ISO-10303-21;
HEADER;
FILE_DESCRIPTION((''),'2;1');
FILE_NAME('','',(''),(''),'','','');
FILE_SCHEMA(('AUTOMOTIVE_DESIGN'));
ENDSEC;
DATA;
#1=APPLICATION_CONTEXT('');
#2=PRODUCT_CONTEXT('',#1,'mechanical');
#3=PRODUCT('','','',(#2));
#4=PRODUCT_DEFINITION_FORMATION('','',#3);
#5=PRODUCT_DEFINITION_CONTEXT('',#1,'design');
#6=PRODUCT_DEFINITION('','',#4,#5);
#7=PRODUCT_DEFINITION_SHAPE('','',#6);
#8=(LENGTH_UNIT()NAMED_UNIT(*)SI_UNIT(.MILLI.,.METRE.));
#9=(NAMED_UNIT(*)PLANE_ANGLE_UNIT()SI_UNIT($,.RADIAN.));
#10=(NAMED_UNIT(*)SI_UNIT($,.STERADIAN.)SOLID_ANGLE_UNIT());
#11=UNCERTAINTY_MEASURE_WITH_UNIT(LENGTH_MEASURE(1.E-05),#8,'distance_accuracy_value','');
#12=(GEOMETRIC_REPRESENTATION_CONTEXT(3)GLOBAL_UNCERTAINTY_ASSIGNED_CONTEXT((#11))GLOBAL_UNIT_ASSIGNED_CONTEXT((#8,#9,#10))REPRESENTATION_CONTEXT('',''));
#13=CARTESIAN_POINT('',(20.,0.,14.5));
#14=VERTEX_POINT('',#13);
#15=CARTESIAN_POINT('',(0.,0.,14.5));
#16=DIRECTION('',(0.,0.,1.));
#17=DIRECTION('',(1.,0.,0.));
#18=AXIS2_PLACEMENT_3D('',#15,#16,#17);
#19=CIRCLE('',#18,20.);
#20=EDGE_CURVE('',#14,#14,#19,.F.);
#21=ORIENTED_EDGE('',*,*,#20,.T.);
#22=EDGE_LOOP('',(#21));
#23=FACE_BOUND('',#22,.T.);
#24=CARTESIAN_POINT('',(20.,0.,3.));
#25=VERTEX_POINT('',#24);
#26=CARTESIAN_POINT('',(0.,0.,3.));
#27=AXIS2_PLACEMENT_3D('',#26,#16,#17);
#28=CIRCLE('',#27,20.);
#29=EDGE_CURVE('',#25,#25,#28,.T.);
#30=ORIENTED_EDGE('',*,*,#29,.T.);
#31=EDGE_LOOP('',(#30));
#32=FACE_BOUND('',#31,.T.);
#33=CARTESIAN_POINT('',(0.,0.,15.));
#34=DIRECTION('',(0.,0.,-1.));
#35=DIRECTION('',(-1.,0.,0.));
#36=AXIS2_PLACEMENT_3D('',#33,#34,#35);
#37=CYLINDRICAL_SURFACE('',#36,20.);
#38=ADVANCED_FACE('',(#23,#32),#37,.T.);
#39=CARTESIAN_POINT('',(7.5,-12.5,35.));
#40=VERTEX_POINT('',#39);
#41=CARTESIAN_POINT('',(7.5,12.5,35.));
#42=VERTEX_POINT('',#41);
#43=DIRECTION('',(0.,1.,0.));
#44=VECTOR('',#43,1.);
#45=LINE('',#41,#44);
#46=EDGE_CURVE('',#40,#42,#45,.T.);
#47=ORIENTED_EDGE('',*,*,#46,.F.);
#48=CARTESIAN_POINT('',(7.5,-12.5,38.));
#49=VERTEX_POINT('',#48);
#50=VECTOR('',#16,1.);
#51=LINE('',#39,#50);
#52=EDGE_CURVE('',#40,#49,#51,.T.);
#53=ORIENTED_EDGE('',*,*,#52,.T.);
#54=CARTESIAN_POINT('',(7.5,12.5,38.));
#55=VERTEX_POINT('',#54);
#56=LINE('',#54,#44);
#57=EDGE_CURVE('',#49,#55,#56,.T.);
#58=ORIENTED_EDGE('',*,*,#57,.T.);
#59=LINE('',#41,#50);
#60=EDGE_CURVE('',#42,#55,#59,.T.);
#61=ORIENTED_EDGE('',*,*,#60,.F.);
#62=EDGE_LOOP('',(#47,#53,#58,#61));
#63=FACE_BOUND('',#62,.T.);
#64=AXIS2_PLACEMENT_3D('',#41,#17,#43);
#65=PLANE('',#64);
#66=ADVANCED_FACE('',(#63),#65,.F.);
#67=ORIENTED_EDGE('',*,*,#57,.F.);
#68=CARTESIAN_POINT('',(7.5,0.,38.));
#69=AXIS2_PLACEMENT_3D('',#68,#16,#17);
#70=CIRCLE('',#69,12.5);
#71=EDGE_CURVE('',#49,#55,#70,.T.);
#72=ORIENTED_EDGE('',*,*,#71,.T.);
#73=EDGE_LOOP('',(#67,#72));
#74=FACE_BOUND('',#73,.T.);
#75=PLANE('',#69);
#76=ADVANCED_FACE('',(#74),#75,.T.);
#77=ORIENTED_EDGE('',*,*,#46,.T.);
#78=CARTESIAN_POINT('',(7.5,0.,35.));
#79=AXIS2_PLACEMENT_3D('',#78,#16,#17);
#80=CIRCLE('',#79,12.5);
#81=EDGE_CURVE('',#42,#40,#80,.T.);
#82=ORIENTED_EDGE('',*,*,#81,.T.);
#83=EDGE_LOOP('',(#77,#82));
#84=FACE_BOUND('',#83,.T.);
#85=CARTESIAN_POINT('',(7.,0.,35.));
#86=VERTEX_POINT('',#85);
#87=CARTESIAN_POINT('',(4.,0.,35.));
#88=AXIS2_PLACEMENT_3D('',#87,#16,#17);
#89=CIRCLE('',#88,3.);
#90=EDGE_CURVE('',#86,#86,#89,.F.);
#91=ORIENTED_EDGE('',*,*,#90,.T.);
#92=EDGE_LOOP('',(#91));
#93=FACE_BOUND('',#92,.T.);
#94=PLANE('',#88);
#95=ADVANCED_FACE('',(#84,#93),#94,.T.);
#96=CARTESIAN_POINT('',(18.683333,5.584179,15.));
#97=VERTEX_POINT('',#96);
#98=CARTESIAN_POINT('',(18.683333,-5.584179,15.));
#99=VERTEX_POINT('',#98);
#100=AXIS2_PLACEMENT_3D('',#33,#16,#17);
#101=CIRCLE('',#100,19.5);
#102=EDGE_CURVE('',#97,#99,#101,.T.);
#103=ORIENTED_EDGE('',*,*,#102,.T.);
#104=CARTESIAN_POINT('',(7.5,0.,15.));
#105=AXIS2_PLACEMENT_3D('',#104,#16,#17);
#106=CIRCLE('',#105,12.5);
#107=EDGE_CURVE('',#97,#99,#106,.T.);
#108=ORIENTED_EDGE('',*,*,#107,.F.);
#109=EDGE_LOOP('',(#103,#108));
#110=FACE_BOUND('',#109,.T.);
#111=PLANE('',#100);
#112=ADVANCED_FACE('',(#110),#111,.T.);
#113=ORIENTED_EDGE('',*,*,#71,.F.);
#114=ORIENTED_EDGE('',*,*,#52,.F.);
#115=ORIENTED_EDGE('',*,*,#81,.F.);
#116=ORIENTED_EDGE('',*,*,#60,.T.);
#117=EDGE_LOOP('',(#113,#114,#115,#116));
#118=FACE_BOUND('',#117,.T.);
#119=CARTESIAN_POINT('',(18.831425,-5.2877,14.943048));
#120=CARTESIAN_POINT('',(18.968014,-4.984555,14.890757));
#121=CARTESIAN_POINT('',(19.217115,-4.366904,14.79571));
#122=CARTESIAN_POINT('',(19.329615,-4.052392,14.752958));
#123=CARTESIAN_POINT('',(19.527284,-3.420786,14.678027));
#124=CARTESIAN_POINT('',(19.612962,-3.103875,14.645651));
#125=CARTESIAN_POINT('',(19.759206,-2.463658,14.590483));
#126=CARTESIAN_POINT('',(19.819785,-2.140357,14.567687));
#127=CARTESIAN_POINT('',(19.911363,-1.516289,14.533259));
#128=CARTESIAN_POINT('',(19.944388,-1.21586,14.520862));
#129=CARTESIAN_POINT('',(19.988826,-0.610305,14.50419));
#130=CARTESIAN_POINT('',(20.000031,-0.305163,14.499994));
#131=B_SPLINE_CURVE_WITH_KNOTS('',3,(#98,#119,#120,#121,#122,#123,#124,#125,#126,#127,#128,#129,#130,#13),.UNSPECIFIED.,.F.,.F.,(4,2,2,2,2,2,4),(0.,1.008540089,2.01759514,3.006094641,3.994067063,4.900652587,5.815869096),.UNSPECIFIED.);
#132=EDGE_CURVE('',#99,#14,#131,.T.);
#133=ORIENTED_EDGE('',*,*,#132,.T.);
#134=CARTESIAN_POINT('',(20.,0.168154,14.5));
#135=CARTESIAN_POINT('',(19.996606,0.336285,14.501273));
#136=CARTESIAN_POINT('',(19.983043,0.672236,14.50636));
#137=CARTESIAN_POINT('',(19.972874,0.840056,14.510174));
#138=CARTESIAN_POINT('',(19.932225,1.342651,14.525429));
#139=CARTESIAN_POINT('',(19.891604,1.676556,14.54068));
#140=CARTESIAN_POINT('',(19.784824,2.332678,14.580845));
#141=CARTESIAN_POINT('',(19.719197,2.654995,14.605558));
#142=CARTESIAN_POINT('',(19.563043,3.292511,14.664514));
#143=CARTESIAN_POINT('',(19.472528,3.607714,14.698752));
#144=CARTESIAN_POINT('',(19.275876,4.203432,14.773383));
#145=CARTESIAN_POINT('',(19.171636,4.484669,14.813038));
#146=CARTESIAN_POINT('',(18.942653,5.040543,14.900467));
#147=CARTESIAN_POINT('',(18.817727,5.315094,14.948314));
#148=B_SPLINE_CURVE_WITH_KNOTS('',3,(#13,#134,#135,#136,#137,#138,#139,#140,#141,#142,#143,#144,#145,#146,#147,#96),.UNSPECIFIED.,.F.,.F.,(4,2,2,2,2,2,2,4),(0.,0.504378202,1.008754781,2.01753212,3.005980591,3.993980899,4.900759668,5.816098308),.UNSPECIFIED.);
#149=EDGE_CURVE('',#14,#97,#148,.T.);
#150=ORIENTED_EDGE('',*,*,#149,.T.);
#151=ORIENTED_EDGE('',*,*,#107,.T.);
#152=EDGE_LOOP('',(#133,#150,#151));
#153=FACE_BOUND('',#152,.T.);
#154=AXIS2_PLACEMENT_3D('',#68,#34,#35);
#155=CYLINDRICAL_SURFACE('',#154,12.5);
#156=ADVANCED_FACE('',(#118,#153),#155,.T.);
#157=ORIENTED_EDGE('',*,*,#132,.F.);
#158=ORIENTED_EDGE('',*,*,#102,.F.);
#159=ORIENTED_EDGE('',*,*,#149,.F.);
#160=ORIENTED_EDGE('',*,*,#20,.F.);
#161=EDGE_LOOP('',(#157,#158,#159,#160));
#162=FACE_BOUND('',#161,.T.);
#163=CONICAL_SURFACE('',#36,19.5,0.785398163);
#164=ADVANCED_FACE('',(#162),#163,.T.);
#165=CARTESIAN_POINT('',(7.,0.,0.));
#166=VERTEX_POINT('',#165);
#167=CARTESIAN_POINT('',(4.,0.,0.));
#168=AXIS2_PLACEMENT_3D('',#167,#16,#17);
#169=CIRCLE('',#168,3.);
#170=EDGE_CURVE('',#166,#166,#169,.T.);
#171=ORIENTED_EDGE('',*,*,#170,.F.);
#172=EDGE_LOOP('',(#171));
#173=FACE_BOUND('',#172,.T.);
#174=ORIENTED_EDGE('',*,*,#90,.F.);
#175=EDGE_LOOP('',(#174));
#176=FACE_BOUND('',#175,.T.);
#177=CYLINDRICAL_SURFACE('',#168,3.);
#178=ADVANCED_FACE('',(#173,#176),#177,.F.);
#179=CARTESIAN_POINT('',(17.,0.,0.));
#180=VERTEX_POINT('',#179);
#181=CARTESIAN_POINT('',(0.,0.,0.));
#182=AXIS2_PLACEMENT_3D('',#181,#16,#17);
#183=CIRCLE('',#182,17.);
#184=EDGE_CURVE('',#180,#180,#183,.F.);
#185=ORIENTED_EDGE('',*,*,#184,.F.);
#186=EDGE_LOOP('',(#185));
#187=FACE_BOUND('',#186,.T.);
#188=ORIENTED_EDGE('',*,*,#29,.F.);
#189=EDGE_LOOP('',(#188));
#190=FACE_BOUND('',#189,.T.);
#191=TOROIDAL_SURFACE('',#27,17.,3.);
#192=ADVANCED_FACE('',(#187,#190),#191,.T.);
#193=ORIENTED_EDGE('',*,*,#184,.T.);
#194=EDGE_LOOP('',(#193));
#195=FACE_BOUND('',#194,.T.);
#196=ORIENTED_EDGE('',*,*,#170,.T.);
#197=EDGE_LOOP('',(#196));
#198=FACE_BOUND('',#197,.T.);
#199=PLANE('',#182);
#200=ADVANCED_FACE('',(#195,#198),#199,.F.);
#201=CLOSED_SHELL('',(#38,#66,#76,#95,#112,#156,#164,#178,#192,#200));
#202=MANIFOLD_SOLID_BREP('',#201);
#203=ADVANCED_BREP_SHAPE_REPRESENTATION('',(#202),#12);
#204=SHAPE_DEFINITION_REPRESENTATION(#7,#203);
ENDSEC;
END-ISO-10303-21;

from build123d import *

# Parameters (mm, degrees)
SKETCH1_R           = 20
BOSS_EXTRUDE1_DEPTH = 15
SKETCH2_R           = 12.5
BOSS_EXTRUDE2_DEPTH = 23
SKETCH3_R           = 3
CUT_EXTRUDE1_DEPTH  = 48.370877129
FILLET1_R           = 3
CHAMFER1_SIZE       = 0.5
CUT_EXTRUDE2_DEPTH  = 3


with BuildPart() as part:
    # Sketch1 → Boss-Extrude1 (new body)
    with BuildSketch(Plane.XY):
        Circle(SKETCH1_R)
    extrude(amount=BOSS_EXTRUDE1_DEPTH)

    # Sketch2 → Boss-Extrude2 (add)
    with BuildSketch(Plane.XY.offset(15)):
        with Locations((7.5, 0)):
            Circle(SKETCH2_R)
    extrude(amount=BOSS_EXTRUDE2_DEPTH)

    # Sketch3 → Cut-Extrude1 (cut, through all)
    with BuildSketch(Plane.XY.offset(38)):
        with Locations((4, 0)):
            Circle(SKETCH3_R)
    extrude(amount=-CUT_EXTRUDE1_DEPTH, mode=Mode.SUBTRACT)

    # Fillet1
    fillet1_edges = [part.edges().sort_by_distance(p)[0] for p in [
        (-20, 0, 0),
    ]]
    fillet(fillet1_edges, radius=FILLET1_R)

    # Chamfer1
    # the kernel refuses this chamfer: 0.5 mm, written as the material it takes off along each edge
    with BuildSketch(Plane(origin=(0, 0, 15), x_dir=(1, 0, 0), z_dir=(0, -1, 0))) as chamfer1_piece_1_section:
        Polygon((20, -CHAMFER1_SIZE), (20 - CHAMFER1_SIZE, 0), (20, 0), align=None)
    chamfer1_piece_1 = revolve(axis=Axis((0, 0, 15), (0, 0, 1)), mode=Mode.PRIVATE)
    chamfer1_piece_1 = chamfer1_piece_1 - Plane(origin=(7.5, 0, 14.767938502), x_dir=(1, 0, 0), z_dir=(0, 0, -1)) * Cylinder(12.5, 80, mode=Mode.PRIVATE)
    add(chamfer1_piece_1, mode=Mode.SUBTRACT)

    # Sketch5 → Cut-Extrude2 (cut)
    with BuildSketch(Plane.XY.offset(38)):
        with BuildLine():
            Line((7.5, 12.5), (7.5, -12.5))
            ThreePointArc((7.5, -12.5), (-8.980754986, 0), (7.5, 12.5))
        make_face()
    extrude(amount=-CUT_EXTRUDE2_DEPTH, mode=Mode.SUBTRACT)


solid = part.part
